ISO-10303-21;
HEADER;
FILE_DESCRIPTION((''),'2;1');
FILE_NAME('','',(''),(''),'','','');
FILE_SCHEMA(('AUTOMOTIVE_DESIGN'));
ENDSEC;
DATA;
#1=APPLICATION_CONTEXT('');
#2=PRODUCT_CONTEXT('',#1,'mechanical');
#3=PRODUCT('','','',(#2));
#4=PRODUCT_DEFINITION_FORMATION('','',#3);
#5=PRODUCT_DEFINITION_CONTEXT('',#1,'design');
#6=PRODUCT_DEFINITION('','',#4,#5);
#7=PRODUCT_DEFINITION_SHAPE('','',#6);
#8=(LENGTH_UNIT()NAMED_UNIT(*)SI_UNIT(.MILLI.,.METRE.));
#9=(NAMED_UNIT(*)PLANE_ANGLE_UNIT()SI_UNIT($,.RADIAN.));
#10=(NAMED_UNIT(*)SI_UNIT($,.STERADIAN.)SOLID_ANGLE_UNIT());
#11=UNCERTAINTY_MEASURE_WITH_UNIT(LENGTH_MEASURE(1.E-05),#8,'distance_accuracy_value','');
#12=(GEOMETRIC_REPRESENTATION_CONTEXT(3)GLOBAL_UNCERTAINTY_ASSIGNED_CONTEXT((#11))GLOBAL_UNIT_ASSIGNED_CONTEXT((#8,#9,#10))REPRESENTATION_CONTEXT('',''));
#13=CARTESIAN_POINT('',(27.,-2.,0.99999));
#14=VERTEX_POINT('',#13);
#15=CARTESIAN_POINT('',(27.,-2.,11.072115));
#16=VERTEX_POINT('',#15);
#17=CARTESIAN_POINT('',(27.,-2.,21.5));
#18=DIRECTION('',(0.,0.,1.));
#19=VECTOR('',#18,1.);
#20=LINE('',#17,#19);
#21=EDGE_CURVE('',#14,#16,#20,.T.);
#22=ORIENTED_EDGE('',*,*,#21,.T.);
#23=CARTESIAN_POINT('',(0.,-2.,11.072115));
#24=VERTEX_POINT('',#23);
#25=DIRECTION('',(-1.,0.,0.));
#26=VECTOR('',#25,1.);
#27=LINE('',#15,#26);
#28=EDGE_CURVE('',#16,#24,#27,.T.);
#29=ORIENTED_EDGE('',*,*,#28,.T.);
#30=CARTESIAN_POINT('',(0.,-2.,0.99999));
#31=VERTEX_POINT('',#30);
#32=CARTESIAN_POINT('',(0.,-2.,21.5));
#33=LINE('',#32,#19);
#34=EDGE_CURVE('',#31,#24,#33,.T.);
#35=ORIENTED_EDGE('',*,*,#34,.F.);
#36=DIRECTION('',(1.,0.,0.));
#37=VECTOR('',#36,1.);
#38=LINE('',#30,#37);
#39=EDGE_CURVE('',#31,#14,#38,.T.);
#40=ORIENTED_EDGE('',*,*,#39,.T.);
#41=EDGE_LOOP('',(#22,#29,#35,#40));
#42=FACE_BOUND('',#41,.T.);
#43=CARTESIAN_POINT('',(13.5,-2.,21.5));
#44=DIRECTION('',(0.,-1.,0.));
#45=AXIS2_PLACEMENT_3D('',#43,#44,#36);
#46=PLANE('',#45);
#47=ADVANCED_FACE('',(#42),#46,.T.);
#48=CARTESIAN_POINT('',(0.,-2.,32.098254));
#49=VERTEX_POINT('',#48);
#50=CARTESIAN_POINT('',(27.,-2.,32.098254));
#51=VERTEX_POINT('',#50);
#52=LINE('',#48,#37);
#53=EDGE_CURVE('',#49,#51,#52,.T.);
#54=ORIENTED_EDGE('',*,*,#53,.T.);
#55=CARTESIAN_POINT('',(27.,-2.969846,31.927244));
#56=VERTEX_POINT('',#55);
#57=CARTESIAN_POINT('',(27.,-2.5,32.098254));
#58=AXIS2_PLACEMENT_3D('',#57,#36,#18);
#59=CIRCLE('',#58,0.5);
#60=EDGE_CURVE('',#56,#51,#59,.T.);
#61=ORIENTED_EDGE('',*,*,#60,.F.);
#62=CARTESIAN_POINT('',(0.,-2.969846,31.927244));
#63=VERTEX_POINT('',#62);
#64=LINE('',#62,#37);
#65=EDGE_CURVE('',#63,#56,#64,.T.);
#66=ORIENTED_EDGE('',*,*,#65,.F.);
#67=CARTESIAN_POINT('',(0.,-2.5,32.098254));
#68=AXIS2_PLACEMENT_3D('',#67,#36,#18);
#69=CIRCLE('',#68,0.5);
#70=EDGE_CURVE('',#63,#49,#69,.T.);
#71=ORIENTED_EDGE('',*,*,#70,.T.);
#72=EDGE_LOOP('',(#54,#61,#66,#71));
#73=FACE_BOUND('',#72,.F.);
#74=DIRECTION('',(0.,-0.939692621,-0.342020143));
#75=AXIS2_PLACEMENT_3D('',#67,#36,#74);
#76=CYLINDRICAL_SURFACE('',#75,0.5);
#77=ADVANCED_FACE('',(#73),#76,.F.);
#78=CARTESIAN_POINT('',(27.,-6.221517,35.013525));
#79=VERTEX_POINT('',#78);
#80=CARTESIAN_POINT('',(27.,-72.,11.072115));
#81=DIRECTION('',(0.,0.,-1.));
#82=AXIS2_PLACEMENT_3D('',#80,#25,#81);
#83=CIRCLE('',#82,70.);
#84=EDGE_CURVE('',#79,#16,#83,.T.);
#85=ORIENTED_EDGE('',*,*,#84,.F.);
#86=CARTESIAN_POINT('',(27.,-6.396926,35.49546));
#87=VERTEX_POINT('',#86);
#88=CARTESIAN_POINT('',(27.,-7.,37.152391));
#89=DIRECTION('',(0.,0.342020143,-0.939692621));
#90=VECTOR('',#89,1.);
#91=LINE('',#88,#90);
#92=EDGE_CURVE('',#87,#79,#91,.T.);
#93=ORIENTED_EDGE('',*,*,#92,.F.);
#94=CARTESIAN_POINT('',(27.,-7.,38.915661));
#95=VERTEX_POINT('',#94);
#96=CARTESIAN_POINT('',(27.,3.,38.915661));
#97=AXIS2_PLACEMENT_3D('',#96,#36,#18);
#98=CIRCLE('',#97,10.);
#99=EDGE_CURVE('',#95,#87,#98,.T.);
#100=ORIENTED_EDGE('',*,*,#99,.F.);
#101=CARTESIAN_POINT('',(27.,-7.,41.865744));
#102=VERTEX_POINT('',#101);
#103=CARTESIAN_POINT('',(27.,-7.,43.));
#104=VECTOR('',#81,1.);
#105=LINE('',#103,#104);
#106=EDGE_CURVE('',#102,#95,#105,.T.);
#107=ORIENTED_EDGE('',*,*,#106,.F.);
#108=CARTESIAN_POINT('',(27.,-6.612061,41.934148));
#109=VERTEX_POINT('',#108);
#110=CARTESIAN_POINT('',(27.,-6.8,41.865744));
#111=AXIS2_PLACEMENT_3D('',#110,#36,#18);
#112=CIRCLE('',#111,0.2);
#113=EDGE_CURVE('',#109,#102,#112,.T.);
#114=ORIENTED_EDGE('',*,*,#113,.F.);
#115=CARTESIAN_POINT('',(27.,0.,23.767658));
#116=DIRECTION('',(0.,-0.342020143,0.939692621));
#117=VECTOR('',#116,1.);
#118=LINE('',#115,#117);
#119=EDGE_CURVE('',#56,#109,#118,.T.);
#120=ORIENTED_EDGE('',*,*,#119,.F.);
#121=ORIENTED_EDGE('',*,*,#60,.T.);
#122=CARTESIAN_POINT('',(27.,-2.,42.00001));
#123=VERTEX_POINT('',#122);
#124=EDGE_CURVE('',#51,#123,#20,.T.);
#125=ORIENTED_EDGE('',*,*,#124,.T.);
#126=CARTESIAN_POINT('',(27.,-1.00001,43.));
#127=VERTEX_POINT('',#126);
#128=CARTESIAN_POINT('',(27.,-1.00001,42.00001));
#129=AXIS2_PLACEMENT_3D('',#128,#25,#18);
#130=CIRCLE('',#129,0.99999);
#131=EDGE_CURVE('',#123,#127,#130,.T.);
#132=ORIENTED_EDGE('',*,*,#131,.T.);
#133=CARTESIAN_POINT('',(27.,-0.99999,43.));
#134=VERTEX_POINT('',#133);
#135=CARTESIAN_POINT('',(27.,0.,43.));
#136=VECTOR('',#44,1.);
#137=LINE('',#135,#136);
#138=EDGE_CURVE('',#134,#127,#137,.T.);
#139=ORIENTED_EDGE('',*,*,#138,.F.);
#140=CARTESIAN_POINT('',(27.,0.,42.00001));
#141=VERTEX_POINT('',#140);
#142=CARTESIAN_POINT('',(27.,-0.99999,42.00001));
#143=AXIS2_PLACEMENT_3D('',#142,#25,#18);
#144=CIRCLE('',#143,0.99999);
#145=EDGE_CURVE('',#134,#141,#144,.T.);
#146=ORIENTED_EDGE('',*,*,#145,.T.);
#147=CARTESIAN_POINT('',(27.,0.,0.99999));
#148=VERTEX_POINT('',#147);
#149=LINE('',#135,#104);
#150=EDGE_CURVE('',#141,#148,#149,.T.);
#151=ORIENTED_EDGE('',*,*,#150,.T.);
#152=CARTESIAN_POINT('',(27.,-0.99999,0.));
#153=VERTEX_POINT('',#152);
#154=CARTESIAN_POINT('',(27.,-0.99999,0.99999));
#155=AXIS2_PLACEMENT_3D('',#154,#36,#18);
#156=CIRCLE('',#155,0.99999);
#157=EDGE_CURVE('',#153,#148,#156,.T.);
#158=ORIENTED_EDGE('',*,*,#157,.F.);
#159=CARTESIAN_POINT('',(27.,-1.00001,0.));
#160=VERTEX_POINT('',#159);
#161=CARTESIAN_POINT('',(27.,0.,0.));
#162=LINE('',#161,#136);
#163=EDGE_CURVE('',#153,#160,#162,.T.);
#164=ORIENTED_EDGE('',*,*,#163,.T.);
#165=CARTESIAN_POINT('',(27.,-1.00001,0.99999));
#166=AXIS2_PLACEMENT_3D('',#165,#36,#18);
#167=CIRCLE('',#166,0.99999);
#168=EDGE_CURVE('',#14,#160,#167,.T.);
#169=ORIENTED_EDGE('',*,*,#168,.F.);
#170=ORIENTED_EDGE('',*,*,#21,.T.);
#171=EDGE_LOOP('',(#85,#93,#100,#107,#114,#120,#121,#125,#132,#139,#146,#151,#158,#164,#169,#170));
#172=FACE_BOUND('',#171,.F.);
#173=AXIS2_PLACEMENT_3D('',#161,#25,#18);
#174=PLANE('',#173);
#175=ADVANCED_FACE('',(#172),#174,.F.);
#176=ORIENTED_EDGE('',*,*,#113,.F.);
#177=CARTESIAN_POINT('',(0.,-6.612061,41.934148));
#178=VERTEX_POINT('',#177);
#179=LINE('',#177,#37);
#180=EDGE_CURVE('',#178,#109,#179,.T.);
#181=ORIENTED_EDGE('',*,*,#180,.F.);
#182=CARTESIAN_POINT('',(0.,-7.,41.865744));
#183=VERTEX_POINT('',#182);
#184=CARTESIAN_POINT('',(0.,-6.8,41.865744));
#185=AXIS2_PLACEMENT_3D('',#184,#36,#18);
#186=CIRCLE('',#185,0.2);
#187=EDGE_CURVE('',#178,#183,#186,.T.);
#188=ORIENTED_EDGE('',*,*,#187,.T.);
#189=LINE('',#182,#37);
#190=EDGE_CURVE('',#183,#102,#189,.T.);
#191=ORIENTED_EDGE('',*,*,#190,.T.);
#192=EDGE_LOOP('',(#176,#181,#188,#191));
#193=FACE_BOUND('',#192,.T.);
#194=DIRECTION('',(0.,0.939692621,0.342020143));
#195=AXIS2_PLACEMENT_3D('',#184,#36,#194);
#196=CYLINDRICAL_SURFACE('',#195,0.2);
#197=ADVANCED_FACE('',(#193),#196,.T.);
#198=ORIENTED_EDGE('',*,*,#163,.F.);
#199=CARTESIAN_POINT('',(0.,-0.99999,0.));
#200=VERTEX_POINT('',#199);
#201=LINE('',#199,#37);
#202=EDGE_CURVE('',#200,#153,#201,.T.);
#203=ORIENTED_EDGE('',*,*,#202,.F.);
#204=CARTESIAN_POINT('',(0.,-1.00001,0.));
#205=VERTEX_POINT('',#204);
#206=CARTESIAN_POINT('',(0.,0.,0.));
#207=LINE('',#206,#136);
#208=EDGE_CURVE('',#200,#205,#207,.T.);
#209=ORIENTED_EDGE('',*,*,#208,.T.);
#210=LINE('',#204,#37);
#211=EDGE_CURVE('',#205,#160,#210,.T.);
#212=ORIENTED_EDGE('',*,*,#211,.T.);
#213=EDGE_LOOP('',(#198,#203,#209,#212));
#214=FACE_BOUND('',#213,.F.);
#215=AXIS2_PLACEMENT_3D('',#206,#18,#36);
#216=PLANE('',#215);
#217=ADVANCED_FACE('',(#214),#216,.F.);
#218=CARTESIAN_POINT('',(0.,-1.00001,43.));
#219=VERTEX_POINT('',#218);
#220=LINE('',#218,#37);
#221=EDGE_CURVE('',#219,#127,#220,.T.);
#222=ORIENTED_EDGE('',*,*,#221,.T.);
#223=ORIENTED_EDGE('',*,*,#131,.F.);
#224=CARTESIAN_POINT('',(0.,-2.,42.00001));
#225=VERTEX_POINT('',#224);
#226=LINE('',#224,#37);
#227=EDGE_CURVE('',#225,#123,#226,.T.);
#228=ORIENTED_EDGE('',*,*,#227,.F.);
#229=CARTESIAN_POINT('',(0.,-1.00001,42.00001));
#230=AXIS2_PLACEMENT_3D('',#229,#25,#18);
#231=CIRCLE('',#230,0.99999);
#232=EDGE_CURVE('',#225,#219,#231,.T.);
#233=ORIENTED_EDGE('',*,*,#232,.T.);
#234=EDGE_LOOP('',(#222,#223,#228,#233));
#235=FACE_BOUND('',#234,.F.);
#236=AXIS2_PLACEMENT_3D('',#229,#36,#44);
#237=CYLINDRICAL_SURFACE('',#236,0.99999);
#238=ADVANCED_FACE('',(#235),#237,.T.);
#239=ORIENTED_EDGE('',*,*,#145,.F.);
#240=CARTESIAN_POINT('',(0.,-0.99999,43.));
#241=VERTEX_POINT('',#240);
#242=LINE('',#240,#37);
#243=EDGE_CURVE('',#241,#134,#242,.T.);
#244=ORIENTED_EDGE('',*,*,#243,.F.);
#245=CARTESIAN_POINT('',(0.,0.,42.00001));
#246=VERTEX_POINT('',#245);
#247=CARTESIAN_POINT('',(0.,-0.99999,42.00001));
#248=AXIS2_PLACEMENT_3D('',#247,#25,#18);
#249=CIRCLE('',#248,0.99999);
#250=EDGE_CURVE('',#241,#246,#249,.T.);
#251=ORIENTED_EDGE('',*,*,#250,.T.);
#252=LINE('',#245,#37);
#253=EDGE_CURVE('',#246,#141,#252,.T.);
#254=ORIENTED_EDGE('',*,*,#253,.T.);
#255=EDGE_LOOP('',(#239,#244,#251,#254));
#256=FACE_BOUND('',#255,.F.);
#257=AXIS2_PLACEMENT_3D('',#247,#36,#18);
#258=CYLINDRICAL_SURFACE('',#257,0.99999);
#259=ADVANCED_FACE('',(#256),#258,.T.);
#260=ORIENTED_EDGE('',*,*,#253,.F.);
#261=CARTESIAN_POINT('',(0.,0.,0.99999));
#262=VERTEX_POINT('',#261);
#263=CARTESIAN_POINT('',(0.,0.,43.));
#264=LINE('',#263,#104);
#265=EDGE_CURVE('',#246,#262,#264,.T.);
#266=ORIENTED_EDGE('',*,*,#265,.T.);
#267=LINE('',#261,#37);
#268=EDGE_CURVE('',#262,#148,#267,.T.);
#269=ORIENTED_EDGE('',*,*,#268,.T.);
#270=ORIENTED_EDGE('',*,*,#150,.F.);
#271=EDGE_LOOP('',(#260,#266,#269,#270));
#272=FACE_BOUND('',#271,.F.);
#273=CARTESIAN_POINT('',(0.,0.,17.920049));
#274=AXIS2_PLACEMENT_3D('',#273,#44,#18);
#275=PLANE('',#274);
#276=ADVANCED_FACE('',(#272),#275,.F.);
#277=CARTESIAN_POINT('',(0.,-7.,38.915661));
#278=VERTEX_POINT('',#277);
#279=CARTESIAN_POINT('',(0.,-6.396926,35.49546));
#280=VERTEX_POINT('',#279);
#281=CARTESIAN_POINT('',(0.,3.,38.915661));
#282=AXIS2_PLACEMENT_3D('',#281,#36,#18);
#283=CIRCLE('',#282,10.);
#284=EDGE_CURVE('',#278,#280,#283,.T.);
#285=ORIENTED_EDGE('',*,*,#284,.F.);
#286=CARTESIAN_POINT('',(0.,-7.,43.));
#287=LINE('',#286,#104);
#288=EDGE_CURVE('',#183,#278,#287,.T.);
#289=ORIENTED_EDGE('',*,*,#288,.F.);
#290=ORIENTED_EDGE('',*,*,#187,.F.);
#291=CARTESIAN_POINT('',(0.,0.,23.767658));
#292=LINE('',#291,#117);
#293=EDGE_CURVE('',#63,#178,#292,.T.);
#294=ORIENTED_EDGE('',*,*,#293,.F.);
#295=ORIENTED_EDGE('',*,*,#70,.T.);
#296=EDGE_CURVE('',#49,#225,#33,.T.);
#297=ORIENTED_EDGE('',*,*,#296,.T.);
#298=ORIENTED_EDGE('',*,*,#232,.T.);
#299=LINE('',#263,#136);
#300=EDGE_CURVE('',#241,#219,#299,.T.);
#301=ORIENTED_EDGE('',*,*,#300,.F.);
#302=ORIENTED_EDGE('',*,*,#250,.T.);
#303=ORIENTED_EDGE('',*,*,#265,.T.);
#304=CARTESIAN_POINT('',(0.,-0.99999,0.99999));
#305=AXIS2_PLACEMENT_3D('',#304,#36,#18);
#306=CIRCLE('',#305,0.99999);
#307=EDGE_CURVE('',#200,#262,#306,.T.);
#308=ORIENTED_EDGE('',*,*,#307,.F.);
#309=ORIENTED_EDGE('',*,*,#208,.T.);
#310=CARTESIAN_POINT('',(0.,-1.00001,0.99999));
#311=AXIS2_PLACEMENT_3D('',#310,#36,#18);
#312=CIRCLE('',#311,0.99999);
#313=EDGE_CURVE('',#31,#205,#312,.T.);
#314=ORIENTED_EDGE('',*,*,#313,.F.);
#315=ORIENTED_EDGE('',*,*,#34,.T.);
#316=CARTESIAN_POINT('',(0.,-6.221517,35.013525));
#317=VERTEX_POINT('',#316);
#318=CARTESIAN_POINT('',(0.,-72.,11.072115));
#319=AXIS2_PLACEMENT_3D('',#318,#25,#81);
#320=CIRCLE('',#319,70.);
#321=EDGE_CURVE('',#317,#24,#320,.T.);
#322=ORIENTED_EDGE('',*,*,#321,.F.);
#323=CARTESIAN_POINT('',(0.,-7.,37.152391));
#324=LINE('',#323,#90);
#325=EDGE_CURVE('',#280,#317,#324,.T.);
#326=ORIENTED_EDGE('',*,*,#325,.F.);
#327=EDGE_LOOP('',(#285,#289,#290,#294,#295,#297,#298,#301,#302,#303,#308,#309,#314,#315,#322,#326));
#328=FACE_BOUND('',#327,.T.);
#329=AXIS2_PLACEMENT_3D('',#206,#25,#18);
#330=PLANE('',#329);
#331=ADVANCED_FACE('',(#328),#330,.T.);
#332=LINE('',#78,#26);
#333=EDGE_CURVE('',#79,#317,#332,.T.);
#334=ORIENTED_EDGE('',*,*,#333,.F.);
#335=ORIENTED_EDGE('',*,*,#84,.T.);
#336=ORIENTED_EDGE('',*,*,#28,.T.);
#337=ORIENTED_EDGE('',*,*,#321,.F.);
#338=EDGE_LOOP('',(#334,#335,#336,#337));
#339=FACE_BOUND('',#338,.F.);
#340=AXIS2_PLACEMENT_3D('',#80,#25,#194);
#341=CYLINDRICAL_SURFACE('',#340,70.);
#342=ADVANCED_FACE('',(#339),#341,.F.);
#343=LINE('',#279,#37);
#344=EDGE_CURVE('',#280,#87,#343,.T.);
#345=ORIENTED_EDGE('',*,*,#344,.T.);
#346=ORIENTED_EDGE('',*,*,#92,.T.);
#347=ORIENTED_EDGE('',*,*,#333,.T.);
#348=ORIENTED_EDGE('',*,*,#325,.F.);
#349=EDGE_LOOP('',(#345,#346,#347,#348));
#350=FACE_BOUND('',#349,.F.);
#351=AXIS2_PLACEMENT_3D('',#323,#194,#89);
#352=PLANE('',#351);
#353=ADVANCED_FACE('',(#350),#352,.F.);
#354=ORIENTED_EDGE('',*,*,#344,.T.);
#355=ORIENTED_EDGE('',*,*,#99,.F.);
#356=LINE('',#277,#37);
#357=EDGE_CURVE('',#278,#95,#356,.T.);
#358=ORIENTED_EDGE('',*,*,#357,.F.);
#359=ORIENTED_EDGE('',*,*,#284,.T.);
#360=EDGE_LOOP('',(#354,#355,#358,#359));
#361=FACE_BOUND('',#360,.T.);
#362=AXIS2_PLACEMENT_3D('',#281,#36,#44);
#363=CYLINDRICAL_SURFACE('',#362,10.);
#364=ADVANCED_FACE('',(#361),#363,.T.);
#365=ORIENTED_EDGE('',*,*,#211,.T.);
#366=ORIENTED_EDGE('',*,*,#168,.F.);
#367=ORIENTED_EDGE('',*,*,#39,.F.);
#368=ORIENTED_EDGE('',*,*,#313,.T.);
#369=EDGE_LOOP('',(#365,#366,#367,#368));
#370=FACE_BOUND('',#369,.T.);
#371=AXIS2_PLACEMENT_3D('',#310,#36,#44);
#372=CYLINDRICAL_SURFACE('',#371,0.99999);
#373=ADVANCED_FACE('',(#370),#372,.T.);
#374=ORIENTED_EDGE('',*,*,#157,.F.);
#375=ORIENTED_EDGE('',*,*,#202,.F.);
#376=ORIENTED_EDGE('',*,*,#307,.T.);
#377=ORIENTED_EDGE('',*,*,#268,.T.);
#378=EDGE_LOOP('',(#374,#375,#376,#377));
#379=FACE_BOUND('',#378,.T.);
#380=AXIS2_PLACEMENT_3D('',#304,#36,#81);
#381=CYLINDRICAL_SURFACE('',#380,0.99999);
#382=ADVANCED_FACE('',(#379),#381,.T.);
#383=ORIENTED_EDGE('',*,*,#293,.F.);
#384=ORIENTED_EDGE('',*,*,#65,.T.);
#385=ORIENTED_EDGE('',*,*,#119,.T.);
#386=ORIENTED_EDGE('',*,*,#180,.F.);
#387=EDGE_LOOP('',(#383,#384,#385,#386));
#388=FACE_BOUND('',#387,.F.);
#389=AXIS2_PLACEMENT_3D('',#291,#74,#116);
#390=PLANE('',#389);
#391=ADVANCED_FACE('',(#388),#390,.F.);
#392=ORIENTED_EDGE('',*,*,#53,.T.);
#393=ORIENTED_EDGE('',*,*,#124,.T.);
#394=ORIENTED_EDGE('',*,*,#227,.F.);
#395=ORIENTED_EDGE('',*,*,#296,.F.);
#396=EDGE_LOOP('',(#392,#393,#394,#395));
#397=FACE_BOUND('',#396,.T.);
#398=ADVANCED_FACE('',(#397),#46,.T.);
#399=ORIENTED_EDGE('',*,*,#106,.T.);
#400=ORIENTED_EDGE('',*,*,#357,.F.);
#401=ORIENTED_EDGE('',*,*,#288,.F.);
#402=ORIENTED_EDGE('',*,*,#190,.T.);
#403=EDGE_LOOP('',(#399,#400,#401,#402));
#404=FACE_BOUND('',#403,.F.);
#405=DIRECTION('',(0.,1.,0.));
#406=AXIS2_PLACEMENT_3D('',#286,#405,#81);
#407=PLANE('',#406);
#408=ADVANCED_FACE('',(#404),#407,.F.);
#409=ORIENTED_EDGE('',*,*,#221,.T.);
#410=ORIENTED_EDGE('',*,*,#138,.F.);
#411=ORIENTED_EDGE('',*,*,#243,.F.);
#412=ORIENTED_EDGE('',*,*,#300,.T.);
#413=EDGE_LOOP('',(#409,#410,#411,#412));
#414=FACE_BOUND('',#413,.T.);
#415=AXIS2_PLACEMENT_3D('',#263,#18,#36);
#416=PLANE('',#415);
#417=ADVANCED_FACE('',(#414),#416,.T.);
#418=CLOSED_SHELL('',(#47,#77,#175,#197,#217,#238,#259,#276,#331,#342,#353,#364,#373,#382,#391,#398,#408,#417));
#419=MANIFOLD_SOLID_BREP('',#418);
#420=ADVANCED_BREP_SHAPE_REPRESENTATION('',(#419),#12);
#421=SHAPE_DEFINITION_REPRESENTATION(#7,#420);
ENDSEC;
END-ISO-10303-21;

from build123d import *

# Parameters (mm, degrees)
F0_W     = 27
F0_H     = 43
F1_DEPTH = 2
F3_DEPTH = 27
F4_R     = 70
F5_R     = 0.5
F6_R     = 10
F7_R     = 0.99999
F8_R     = 0.2


# Not quite as in the source:
# - a fillet or chamfer is up to 0.001 mm smaller than in the source, because OpenCascade refuses the exact size


with BuildPart() as f1:
    # F0 (on Front) → F1 (new body)
    with BuildSketch(Plane.XZ):
        with Locations((13.5, 21.5)):
            Rectangle(F0_W, F0_H)
    extrude(amount=F1_DEPTH)

    # F2 (on Right) → F3 (join, through all)
    with BuildSketch(Plane.YZ):
        Polygon((0, 17.9200492635), (0, 23.7676580638), (-7, 43), (-7, 37.1523911997), align=None)
    extrude(amount=F3_DEPTH)

    # F4
    f4_edges = [f1.edges().sort_by_distance(p)[0] for p in [
        (13.5, -2, 23.415004),
    ]]
    fillet(f4_edges, radius=F4_R)

    # F5
    f5_edges = [f1.edges().sort_by_distance(p)[0] for p in [
        (13.5, -2, 29.262613),
    ]]
    fillet(f5_edges, radius=F5_R)

    # F6
    f6_edges = [f1.edges().sort_by_distance(p)[0] for p in [
        (13.5, -7, 37.152391),
    ]]
    fillet(f6_edges, radius=F6_R)

    # F7 (radius 1 in the source; OpenCascade refuses exactly that, so slightly less here)
    f7_edges = [f1.edges().sort_by_distance(p)[0] for p in [
        (13.5, -2, 43),
        (13.5, 0, 43),
        (13.5, -2, 0),
        (13.5, 0, 0),
    ]]
    fillet(f7_edges, radius=F7_R)

    # F8
    f8_edges = [f1.edges().sort_by_distance(p)[0] for p in [
        (13.5, -7, 43),
    ]]
    fillet(f8_edges, radius=F8_R)


solid = f1.part
